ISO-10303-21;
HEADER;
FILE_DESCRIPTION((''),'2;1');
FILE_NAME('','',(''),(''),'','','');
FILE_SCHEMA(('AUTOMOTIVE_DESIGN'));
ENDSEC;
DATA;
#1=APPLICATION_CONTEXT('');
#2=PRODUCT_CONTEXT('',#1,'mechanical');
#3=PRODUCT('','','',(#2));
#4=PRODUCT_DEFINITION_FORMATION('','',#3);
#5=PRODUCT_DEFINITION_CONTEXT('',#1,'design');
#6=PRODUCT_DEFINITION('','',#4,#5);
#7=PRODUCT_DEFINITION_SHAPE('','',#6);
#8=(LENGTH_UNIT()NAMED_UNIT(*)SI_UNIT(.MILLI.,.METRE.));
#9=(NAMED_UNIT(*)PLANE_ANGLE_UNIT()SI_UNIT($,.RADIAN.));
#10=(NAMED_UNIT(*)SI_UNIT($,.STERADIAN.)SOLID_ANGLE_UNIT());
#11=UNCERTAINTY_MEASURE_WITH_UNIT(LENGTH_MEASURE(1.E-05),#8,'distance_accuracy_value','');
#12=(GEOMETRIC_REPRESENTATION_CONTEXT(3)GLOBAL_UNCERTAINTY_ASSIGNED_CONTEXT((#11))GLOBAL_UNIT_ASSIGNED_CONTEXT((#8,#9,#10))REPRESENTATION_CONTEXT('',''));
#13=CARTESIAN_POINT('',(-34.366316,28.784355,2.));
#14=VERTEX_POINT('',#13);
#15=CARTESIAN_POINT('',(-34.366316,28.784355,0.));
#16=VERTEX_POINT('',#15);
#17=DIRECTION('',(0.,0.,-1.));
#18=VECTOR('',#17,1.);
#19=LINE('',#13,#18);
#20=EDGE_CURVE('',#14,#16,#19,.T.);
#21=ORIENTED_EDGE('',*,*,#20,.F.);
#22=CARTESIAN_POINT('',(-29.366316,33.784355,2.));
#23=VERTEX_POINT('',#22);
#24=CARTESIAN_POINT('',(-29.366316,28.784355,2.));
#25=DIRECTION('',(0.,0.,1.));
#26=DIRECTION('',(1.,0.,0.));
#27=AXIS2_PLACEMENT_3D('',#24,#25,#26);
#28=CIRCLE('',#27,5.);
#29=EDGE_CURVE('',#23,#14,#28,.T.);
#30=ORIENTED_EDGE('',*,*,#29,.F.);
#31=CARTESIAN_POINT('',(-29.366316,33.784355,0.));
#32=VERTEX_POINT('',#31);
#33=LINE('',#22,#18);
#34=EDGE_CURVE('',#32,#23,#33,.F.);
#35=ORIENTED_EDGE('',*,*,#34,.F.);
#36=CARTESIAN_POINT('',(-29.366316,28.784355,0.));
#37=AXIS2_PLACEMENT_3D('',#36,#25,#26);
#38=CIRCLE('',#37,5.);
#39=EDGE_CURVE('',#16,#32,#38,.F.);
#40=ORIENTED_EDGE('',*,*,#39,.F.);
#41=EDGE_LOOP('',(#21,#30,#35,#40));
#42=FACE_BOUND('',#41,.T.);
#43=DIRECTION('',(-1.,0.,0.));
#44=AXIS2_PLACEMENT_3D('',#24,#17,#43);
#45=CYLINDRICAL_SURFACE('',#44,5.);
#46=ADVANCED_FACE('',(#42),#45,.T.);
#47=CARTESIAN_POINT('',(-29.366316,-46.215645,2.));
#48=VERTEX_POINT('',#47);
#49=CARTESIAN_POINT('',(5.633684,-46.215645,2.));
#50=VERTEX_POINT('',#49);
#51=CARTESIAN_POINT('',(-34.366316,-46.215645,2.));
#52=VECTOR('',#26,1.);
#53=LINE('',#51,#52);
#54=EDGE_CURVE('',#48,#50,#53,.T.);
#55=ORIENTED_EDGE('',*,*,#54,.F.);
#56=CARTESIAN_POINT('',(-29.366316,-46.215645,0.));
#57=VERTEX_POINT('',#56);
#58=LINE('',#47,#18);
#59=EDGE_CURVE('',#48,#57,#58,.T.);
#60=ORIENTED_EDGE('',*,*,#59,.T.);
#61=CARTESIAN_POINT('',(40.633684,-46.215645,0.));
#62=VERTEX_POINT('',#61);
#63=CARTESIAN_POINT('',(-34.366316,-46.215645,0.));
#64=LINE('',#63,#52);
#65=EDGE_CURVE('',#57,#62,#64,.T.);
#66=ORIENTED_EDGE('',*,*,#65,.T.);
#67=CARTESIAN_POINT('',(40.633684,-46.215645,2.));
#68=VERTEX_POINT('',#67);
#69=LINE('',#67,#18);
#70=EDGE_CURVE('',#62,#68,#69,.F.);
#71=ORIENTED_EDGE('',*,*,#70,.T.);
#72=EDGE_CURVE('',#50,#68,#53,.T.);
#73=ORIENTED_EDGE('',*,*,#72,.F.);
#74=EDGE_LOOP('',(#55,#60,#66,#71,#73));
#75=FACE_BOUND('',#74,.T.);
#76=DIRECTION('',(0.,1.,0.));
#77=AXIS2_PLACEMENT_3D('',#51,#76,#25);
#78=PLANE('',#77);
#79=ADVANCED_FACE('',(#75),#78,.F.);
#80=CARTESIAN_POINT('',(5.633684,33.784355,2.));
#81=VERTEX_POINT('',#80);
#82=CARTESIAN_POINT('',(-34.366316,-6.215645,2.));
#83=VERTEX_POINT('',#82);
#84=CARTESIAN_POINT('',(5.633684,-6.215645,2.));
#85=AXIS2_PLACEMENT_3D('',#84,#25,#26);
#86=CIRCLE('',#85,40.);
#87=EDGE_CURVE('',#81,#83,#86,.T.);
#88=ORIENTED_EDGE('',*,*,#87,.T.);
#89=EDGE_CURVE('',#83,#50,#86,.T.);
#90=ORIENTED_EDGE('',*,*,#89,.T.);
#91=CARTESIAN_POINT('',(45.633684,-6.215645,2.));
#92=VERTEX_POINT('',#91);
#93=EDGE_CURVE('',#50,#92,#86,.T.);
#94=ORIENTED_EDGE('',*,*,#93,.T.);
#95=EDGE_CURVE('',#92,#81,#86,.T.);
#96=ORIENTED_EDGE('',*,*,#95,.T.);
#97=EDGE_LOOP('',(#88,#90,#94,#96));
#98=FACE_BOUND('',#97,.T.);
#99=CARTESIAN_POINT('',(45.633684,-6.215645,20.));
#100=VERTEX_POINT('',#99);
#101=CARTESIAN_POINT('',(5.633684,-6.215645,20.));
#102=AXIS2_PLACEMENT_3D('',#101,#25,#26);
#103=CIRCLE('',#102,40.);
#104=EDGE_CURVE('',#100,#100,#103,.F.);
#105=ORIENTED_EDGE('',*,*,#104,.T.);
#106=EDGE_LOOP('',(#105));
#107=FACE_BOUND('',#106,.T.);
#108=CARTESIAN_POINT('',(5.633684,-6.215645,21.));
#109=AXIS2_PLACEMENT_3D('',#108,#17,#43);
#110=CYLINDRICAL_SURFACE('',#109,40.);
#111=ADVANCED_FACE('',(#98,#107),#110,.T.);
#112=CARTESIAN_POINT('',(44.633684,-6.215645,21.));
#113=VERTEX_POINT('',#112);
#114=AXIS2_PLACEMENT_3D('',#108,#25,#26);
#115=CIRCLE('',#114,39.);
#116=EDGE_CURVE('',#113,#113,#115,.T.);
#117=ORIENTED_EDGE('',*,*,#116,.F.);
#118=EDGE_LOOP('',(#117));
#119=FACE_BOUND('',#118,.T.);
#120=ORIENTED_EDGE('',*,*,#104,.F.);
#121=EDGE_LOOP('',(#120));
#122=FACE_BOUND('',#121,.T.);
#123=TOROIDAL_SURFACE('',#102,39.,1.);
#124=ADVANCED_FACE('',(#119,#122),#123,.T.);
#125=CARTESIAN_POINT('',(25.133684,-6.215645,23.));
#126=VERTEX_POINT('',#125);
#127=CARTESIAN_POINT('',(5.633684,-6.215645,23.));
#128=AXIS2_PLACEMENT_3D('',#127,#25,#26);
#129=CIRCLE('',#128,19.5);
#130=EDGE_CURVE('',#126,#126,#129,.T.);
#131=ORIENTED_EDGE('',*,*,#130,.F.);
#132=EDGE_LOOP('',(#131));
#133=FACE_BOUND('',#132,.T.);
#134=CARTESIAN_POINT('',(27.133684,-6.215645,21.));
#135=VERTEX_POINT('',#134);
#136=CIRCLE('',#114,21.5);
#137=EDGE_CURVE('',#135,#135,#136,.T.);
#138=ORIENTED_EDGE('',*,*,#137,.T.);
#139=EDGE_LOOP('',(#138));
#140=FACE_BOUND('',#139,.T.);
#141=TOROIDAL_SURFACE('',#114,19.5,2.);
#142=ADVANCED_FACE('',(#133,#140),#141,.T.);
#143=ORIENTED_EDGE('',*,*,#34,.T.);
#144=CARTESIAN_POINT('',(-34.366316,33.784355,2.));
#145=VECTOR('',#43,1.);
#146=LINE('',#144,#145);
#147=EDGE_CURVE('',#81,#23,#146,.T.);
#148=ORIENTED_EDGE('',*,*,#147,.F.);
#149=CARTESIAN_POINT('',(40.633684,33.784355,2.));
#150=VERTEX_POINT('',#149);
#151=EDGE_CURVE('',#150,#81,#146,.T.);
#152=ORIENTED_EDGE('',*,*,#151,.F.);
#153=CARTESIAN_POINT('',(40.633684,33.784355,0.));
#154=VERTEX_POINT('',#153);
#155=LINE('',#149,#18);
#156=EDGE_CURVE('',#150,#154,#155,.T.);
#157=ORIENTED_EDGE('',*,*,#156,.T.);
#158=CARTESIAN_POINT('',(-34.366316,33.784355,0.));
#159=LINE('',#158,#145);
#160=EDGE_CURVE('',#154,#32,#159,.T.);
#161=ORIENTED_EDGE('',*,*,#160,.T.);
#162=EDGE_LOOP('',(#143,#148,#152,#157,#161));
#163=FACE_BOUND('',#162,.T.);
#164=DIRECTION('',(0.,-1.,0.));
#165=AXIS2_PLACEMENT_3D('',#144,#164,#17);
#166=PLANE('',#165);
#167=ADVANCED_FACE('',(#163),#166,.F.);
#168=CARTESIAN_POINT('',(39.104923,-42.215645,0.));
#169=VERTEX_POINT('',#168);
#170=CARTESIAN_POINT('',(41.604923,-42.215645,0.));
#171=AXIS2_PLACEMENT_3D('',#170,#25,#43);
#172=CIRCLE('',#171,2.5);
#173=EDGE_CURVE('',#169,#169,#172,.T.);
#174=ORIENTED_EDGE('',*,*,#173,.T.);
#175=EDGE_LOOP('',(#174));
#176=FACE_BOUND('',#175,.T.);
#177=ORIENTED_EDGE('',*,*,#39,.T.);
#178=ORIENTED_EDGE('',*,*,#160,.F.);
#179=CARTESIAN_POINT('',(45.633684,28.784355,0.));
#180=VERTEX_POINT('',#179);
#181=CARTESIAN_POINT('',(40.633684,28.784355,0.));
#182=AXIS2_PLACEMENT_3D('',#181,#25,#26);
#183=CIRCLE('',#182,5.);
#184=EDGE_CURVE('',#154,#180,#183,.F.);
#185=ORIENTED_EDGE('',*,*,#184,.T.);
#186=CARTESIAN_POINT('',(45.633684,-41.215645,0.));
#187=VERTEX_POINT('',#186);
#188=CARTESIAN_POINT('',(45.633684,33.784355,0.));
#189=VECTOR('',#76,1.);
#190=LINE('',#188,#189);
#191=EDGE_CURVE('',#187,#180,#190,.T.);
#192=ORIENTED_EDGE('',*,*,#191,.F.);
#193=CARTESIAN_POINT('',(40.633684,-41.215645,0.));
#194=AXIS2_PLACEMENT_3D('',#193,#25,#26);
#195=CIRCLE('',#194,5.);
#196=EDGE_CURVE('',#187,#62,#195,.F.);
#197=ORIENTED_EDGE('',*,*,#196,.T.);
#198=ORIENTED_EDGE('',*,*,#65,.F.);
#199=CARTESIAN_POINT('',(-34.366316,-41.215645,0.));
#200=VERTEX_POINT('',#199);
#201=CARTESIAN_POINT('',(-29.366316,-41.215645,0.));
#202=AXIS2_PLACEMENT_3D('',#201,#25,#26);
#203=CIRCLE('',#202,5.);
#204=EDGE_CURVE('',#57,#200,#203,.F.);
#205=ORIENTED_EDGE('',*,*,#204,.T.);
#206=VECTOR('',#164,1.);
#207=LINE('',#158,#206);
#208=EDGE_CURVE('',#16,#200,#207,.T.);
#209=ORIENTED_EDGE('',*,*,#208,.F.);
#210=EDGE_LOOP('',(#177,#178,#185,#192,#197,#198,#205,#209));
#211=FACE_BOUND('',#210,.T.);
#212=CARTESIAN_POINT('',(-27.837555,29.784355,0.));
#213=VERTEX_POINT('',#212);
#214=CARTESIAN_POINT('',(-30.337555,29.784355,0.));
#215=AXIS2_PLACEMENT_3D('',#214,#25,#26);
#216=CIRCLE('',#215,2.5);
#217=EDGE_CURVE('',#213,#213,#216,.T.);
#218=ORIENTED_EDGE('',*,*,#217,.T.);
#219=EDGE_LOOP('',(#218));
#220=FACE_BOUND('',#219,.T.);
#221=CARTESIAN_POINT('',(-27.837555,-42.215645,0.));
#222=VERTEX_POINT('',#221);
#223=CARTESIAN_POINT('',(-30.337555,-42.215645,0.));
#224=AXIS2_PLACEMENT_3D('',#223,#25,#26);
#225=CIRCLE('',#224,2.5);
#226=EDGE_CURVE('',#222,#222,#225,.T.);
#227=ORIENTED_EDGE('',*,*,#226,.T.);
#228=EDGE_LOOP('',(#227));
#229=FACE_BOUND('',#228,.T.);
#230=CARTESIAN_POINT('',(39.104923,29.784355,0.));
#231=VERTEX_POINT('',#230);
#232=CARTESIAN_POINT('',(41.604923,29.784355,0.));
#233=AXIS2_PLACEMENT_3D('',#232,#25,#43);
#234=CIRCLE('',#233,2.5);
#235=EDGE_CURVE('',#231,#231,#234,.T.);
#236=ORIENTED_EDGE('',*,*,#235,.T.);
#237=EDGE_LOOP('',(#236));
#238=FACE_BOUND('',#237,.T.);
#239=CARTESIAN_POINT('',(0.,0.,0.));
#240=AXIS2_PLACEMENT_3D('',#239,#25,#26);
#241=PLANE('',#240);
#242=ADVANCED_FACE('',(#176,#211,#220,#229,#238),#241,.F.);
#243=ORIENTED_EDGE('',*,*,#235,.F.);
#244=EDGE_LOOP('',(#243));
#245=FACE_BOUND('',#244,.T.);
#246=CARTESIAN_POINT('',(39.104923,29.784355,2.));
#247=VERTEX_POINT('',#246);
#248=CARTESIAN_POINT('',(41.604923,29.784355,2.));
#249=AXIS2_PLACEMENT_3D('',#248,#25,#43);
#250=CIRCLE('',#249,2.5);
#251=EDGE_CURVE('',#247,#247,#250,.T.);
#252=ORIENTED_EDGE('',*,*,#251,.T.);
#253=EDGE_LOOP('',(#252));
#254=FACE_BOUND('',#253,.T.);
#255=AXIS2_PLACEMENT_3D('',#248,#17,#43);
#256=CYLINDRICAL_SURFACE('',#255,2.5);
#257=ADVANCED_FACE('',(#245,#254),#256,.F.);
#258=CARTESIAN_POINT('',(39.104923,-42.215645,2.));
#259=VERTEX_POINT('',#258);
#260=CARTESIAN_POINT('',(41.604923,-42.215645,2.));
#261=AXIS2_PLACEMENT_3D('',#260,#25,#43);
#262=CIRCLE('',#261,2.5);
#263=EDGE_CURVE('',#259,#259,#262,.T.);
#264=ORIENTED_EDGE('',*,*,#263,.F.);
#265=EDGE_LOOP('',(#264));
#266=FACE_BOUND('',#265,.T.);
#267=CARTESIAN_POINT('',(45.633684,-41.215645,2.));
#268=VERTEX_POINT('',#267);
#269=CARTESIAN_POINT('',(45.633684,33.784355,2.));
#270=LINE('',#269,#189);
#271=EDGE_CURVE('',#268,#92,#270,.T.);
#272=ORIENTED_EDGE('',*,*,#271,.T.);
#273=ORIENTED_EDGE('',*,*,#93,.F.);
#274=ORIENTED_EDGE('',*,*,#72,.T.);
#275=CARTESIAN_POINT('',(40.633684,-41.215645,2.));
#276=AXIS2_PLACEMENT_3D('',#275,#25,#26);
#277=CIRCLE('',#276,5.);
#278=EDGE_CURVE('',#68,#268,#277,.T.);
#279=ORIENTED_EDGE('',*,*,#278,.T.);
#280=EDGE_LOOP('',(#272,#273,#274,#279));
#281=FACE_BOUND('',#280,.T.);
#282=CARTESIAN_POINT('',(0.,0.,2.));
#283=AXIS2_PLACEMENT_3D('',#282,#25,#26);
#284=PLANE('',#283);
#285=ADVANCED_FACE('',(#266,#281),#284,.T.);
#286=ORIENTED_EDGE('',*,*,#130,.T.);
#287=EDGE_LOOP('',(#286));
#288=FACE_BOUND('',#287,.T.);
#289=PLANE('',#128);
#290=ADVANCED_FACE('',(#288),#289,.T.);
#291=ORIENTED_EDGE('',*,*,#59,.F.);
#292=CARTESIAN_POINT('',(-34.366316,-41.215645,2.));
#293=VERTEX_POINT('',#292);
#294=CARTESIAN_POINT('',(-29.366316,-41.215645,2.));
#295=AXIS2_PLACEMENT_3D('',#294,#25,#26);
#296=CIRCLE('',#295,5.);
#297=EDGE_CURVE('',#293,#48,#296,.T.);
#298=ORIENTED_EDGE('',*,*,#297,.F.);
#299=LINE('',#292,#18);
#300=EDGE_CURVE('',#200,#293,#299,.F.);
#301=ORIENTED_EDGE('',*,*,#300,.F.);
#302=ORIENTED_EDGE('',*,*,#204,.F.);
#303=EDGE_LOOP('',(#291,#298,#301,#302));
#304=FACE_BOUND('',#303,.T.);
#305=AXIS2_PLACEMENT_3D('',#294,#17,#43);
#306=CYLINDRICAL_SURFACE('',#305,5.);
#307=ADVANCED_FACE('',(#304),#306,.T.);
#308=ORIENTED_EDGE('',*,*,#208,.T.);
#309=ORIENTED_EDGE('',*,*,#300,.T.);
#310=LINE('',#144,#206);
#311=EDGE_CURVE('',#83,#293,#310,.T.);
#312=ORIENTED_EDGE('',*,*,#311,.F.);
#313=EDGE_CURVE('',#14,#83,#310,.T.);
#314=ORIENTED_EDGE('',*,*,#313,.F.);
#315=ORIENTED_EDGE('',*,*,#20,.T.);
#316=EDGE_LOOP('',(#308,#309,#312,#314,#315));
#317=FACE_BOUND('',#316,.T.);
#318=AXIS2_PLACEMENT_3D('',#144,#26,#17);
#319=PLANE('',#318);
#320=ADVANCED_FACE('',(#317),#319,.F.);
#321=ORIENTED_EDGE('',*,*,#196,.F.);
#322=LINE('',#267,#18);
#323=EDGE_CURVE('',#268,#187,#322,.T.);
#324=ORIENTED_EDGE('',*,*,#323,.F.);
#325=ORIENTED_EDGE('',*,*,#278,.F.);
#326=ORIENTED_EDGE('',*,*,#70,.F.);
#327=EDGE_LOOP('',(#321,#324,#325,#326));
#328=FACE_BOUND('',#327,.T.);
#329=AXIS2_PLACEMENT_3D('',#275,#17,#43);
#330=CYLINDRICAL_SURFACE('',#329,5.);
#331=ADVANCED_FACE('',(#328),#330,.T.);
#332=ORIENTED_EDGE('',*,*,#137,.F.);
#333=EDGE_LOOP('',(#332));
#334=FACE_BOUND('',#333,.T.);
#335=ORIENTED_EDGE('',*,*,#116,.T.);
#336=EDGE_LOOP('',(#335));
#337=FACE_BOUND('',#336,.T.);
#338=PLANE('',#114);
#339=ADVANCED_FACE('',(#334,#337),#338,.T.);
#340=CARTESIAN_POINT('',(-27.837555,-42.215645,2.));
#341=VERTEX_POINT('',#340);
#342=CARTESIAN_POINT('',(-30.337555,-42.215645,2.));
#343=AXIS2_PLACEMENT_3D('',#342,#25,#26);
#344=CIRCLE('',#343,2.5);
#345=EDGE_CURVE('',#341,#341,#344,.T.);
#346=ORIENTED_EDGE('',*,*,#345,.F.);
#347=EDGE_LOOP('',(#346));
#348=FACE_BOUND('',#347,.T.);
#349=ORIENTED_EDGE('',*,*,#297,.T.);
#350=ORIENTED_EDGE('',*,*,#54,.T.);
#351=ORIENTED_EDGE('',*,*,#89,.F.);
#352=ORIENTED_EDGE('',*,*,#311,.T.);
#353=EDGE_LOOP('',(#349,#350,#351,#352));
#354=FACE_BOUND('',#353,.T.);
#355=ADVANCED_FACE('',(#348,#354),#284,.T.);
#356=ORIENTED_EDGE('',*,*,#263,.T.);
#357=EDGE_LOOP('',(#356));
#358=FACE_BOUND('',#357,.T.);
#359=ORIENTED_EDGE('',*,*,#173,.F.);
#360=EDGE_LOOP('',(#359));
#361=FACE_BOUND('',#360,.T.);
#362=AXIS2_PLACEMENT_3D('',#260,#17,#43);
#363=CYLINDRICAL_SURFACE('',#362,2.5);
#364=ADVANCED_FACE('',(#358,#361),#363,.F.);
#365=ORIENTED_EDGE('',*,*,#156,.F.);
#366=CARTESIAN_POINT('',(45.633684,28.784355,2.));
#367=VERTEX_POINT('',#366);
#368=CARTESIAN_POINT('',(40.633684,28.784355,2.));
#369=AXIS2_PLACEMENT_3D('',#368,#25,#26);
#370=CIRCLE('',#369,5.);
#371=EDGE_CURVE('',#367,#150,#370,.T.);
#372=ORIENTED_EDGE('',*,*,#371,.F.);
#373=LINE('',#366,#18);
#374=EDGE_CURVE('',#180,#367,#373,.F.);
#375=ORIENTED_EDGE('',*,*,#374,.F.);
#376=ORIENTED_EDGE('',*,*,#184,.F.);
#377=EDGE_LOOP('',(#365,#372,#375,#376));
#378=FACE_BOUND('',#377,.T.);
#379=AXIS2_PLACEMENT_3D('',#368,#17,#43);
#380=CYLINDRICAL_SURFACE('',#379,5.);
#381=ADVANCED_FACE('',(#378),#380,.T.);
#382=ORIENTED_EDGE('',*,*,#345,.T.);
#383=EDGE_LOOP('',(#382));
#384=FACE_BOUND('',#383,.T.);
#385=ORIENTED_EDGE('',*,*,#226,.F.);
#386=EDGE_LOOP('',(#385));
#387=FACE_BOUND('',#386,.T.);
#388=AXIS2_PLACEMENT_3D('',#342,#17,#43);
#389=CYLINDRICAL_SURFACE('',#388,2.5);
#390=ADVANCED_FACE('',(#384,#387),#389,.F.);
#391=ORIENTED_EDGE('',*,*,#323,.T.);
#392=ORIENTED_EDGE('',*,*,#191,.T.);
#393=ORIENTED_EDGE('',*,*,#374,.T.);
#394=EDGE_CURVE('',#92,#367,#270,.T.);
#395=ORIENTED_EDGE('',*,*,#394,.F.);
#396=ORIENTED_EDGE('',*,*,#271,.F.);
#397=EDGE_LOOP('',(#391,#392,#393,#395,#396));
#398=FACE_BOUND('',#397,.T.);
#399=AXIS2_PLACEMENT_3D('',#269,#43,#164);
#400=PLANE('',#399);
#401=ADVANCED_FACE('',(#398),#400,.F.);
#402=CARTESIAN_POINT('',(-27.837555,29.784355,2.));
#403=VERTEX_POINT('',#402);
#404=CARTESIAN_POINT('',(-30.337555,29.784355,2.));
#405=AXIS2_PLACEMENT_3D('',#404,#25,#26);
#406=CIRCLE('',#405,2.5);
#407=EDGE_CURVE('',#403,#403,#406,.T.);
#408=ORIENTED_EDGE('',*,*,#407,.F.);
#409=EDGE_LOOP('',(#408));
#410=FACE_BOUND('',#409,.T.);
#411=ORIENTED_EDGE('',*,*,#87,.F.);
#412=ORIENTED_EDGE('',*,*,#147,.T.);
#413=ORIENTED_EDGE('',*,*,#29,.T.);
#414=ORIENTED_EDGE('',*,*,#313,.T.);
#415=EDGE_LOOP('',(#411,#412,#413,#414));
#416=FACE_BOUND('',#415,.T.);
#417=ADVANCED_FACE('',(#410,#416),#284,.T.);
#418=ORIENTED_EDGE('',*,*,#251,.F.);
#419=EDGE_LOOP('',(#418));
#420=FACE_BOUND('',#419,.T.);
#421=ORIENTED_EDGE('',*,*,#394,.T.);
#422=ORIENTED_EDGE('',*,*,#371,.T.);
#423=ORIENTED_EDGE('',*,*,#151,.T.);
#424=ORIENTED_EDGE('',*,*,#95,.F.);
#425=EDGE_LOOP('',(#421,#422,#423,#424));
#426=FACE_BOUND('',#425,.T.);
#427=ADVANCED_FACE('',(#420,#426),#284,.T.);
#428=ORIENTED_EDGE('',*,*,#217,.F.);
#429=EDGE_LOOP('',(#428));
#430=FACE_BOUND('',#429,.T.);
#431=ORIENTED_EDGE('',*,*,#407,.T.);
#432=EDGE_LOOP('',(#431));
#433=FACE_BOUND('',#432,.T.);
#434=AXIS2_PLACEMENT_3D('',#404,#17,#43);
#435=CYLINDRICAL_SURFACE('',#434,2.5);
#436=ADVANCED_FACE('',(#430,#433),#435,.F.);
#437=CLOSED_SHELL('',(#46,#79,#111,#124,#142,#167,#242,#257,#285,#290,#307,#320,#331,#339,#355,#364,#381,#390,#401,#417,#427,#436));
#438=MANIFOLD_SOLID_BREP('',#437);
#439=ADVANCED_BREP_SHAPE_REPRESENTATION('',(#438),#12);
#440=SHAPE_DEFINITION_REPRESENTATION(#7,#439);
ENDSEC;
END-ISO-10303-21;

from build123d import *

# Parameters (mm, degrees)
ESQUISSE1_W        = 80
ESQUISSE1_H        = 80
ESQUISSE1_R        = 2.5
BOSS_EXTRU_1_DEPTH = 2
ESQUISSE2_R        = 40
BOSS_EXTRU_2_DEPTH = 19
ESQUISSE3_R        = 21.5
BOSS_EXTRU_3_DEPTH = 2
CONG_1_R           = 5
CONG_2_R           = 2
CONG_3_R           = 1


with BuildPart() as part:
    # Esquisse1 → Boss.-Extru.1 (new body)
    with BuildSketch(Plane.XY):
        with Locations((5.633683954, -6.21564482)):
            Rectangle(ESQUISSE1_W, ESQUISSE1_H)
        with Locations((-30.337555091, 29.78435518)):
            Circle(ESQUISSE1_R, mode=Mode.SUBTRACT)
        with Locations((-30.337555091, -42.21564482)):
            Circle(ESQUISSE1_R, mode=Mode.SUBTRACT)
        with Locations(Location((41.604923, -42.21564482, 0), (0, 0, 180))):
            Circle(ESQUISSE1_R, mode=Mode.SUBTRACT)
        with Locations(Location((41.604923, 29.78435518, 0), (0, 0, 180))):
            Circle(ESQUISSE1_R, mode=Mode.SUBTRACT)
    extrude(amount=BOSS_EXTRU_1_DEPTH)

    # Esquisse2 → Boss.-Extru.2 (add)
    with BuildSketch(Plane.XY.offset(2)):
        with Locations((5.633683954, -6.21564482)):
            Circle(ESQUISSE2_R)
    extrude(amount=BOSS_EXTRU_2_DEPTH)

    # Esquisse3 → Boss.-Extru.3 (add)
    with BuildSketch(Plane.XY.offset(21)):
        with Locations((5.633683954, -6.21564482)):
            Circle(ESQUISSE3_R)
    extrude(amount=BOSS_EXTRU_3_DEPTH)

    # Congé1
    cong_1_edges = [part.edges().sort_by_distance(p)[0] for p in [
        (-34.366316046, 33.78435518, 1),
        (45.633683954, 33.78435518, 1),
        (45.633683954, -46.21564482, 1),
        (-34.366316046, -46.21564482, 1),
    ]]
    fillet(cong_1_edges, radius=CONG_1_R)

    # Congé2
    cong_2_edges = [part.edges().sort_by_distance(p)[0] for p in [
        (-15.866316046, -6.21564482, 23),
    ]]
    fillet(cong_2_edges, radius=CONG_2_R - 0.0001)  # a hair under: the kernel refuses the full size

    # Congé3
    cong_3_edges = [part.edges().sort_by_distance(p)[0] for p in [
        (-34.366316046, -6.21564482, 21),
    ]]
    fillet(cong_3_edges, radius=CONG_3_R)


solid = part.part
